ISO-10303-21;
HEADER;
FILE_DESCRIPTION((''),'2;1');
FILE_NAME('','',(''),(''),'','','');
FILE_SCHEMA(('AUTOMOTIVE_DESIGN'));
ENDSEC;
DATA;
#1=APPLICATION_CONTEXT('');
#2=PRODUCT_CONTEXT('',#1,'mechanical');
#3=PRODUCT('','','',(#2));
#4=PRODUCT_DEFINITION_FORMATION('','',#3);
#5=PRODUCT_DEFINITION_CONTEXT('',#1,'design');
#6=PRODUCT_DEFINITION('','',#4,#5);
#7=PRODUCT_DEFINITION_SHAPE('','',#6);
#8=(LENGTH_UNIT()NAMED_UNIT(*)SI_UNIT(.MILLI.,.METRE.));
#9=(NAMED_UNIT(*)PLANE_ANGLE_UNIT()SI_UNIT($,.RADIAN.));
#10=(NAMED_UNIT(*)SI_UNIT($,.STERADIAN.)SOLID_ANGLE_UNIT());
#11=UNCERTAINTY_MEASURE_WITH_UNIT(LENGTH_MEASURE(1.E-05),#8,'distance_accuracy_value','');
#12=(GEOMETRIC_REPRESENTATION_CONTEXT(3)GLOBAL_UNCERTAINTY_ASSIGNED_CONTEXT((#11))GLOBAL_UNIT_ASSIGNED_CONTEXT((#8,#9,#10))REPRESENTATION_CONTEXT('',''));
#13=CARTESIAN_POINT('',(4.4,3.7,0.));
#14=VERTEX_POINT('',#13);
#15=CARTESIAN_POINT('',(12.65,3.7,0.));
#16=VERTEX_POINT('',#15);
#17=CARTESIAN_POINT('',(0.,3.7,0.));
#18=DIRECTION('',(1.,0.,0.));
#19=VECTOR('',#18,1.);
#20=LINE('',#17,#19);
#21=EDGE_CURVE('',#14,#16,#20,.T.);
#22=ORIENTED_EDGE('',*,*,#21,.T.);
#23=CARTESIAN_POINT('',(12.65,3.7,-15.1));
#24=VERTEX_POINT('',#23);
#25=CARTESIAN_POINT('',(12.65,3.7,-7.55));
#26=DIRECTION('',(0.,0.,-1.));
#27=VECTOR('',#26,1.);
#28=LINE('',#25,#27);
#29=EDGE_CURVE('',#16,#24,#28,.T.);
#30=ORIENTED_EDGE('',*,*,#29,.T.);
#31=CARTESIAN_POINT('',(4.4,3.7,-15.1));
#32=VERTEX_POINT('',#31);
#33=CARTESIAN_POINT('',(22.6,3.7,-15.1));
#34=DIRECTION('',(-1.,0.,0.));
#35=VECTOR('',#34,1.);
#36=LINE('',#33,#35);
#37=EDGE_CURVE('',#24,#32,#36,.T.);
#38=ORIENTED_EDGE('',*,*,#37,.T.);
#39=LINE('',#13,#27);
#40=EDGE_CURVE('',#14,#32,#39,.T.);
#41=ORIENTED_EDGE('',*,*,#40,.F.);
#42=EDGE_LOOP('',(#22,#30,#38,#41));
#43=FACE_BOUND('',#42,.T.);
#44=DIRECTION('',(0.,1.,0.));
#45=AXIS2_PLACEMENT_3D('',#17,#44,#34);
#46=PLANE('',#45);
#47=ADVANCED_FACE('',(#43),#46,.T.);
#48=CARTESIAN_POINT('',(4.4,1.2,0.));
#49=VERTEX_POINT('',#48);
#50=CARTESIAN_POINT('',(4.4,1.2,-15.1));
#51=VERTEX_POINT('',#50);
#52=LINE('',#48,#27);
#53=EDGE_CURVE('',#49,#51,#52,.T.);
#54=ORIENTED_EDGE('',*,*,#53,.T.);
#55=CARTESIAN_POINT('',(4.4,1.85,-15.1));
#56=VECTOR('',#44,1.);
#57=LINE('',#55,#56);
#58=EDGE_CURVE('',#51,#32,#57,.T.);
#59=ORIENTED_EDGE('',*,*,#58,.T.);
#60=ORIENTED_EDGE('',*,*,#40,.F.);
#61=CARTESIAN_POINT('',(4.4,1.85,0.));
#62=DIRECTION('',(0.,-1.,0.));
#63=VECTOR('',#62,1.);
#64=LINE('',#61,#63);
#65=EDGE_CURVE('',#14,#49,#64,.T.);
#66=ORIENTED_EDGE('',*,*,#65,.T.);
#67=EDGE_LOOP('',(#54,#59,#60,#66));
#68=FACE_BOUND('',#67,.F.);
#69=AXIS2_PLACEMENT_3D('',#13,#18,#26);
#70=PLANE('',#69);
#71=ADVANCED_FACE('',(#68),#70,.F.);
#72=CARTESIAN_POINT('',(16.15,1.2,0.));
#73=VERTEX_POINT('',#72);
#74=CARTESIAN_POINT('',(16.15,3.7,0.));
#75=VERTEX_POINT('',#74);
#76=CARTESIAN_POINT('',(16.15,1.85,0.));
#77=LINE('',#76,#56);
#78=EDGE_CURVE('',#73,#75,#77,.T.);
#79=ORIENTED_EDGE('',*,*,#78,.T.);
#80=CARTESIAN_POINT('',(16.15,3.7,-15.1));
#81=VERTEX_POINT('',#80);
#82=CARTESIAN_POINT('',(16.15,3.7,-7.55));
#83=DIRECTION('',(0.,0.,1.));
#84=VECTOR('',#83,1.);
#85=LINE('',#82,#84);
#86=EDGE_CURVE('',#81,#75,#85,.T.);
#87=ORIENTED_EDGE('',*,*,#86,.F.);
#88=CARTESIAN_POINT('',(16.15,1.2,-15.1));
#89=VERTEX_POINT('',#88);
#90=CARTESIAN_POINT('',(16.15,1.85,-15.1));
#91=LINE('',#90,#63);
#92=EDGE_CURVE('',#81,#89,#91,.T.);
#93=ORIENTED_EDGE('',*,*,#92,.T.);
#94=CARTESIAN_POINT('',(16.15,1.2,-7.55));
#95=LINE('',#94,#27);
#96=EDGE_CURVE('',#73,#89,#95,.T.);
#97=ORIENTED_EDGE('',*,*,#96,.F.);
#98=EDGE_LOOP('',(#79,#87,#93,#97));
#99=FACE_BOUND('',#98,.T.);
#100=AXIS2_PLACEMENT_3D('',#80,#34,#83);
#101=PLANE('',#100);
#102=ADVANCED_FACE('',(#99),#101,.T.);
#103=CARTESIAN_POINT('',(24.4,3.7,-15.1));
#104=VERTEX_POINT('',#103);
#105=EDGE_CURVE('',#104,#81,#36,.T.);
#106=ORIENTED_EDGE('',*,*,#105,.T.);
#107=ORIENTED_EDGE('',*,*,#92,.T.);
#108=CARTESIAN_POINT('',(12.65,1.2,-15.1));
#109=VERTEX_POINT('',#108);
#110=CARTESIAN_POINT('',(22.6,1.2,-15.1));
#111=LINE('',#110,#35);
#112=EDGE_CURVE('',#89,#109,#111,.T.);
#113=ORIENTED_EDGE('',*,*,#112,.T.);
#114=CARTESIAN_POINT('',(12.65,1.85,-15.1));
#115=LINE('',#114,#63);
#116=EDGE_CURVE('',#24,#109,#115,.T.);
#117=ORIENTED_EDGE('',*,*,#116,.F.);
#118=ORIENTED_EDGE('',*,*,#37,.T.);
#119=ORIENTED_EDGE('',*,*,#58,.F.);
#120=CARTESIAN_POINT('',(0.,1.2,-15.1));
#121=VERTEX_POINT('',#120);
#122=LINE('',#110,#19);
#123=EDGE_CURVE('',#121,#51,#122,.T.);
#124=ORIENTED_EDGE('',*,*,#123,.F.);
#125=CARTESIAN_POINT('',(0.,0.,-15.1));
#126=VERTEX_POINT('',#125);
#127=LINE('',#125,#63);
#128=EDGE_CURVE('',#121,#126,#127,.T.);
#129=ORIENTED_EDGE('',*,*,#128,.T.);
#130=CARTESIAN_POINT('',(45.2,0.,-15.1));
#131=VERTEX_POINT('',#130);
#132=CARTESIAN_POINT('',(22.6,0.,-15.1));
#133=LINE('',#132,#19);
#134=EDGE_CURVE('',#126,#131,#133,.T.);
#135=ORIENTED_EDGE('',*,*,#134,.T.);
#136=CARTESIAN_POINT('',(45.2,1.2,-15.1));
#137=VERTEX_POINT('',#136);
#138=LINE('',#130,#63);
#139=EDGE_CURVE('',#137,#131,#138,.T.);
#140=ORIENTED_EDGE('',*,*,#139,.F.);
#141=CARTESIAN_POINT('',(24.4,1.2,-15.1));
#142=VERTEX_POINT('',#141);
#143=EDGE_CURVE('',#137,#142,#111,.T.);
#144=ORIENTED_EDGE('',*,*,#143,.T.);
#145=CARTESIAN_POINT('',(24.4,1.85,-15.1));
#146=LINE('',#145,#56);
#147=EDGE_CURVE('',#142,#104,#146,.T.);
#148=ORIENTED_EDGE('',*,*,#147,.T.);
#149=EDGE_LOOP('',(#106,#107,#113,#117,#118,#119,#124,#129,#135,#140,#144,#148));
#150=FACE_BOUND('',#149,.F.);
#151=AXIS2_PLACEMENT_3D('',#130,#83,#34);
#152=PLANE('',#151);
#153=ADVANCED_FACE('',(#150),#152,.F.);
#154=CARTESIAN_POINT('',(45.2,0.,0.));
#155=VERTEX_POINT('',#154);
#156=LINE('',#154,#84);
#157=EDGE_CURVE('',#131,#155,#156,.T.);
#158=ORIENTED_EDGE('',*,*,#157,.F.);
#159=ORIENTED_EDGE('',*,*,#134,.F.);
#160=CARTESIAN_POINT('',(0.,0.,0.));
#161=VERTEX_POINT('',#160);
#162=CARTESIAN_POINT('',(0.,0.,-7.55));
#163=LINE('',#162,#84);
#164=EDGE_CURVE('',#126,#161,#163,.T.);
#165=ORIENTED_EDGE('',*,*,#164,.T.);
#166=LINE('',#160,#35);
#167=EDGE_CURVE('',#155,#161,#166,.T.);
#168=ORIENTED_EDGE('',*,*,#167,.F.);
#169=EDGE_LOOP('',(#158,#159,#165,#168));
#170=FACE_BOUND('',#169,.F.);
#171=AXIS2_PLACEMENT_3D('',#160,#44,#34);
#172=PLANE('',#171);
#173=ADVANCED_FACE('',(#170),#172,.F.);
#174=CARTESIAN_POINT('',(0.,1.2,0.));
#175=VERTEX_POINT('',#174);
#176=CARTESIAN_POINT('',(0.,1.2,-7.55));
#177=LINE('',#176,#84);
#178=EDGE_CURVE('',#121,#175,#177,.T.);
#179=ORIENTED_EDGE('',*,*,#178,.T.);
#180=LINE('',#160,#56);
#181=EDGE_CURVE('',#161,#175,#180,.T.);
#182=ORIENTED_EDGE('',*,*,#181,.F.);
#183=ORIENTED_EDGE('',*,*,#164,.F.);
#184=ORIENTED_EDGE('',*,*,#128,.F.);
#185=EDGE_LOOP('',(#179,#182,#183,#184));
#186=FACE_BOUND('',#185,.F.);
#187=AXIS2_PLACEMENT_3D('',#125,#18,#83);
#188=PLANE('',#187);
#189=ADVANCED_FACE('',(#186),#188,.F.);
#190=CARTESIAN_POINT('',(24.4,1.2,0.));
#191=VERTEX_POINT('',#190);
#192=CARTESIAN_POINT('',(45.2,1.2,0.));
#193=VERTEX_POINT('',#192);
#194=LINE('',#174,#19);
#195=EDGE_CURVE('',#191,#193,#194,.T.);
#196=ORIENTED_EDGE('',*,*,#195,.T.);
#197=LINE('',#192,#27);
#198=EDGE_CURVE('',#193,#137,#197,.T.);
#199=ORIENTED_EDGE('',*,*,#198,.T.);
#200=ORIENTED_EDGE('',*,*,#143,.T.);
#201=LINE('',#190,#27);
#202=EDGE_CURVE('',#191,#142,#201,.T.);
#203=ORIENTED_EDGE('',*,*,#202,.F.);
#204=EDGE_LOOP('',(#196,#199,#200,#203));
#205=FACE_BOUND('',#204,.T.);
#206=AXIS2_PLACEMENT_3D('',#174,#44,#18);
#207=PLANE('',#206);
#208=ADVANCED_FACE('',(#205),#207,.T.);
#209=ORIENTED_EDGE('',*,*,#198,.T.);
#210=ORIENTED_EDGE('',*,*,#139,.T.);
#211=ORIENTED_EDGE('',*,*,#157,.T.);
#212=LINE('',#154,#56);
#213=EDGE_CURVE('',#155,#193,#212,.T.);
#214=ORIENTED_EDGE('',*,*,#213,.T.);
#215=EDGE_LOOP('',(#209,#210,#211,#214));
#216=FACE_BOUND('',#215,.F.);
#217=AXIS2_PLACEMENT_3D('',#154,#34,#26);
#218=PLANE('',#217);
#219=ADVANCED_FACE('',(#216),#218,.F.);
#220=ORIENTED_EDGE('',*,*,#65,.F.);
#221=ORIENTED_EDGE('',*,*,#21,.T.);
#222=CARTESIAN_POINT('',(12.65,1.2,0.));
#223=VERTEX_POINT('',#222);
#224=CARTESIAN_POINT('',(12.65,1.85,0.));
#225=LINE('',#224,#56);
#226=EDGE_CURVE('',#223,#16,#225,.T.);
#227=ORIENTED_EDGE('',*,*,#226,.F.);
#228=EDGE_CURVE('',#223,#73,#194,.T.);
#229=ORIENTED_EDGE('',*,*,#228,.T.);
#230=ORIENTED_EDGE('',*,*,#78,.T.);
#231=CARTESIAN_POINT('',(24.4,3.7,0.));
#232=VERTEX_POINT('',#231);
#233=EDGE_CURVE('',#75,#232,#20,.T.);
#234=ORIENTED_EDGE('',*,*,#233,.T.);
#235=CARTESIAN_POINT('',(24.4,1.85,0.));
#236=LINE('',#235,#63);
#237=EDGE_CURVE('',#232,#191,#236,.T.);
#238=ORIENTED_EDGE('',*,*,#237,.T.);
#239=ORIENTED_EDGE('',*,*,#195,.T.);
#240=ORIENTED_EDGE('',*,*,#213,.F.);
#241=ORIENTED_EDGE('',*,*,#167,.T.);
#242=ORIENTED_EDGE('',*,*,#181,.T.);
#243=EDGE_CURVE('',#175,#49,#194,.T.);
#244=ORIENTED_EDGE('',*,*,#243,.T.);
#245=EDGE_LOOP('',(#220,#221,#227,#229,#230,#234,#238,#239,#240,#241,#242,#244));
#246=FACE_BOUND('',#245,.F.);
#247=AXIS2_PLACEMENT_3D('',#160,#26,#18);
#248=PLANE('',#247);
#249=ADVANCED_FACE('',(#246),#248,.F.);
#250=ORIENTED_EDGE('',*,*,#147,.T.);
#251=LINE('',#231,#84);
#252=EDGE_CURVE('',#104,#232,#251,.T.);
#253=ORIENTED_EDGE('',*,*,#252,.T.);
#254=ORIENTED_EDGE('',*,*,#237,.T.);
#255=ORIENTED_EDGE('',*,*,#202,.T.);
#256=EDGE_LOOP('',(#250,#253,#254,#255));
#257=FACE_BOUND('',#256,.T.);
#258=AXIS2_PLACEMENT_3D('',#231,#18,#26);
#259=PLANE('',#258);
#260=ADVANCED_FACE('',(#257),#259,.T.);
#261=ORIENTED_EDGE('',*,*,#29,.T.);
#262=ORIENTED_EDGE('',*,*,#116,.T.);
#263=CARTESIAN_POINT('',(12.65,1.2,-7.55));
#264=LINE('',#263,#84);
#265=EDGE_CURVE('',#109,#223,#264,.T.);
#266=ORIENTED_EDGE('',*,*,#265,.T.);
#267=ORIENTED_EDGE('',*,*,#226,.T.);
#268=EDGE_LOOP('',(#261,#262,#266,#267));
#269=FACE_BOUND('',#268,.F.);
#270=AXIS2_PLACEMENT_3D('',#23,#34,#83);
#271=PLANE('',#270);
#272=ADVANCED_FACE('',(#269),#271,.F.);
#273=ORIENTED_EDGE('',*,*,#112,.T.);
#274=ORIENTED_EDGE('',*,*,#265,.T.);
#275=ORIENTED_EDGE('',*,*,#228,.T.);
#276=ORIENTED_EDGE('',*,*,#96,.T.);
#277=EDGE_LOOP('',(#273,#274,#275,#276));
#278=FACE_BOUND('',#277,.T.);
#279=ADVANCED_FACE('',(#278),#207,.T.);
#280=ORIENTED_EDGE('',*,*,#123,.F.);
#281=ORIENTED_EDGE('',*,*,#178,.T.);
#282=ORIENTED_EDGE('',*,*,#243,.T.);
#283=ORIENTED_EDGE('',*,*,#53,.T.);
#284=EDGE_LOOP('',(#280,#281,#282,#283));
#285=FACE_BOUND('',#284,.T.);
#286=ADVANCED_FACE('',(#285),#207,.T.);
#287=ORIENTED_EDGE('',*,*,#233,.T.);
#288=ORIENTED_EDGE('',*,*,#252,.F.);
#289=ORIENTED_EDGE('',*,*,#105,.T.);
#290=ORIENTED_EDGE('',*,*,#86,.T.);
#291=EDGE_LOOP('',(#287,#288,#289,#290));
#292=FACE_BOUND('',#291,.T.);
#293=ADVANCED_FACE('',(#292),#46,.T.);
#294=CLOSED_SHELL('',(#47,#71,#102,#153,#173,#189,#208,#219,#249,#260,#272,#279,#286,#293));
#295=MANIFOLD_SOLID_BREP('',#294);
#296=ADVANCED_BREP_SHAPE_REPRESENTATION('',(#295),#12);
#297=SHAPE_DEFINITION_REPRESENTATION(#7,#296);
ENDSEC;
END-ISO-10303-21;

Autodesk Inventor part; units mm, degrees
ref_plane "YZ Plane" through (0, 0, 0) normal (1, 0, 0) x (0, 1, 0)
ref_plane "XZ Plane" through (0, 0, 0) normal (0, 1, 0) x (-1, 0, 0)
ref_plane "XY Plane" through (0, 0, 0) normal (0, 0, 1) x (1, 0, 0)
sketch "스케치1" plane through (0, 0, 0) normal (0, 1, 0) x (-1, 0, 0)
  line L0 (0, 0) -> (-45.2, 0)
  line L1 (-45.2, 0) -> (-45.2, -15.1)
  line L2 (-45.2, -15.1) -> (0, -15.1)
  line L3 (0, -15.1) -> (0, 0)
  dimension "d0" = 45.2
  dimension "d1" = 15.1
extrude "돌출1" add sketch "스케치1" along normal blind 3.7
sketch "스케치2" plane through (0, 3.7, 0) normal (0, 1, 0) x (1, 0, 0)
  line L0 (0, 0) -> (45.2, 0) projected
  line L1 (45.2, 15.1) -> (0, 15.1) projected
  line L2 (0, 0) -> (4.4, 0)
  line L3 (4.4, 0) -> (4.4, 15.1)
  line L4 (4.4, 15.1) -> (0, 15.1)
  line L5 (0, 15.1) -> (0, 0)
  line L6 (4.4, 15.1) -> (14.4, 15.1)
  line L7 (14.4, 15.1) -> (14.4, 0)
  line L8 (14.4, 0) -> (4.4, 0)
  line L9 (4.4, 0) -> (4.4, 15.1)
  line L10 (14.4, 0) -> (13.4, 0)
  line L11 (13.4, 0) -> (15.4, 0)
  line L12 (13.4, 0) -> (5.6, 0)
  line L13 (5.6, 0) -> (5.6, 15.1)
  line L14 (5.6, 15.1) -> (13.4, 15.1)
  line L15 (13.4, 15.1) -> (13.4, 0)
  line L16 (15.4, 0) -> (23.2, 0)
  line L17 (23.2, 0) -> (23.2, 15.1)
  line L18 (23.2, 15.1) -> (15.4, 15.1)
  line L19 (15.4, 15.1) -> (15.4, 0)
  line L20 (23.2, 15.1) -> (45.2, 15.1)
  line L21 (45.2, 15.1) -> (45.2, 0)
  line L22 (45.2, 0) -> (23.2, 0)
  line L23 (23.2, 0) -> (23.2, 15.1)
  dimension "d4" = 4.4
  dimension "d5" = 10
  dimension "d6" = 1
  dimension "d7" = 2
  dimension "d8" = 7.8
  dimension "d9" = 7.8
extrude "돌출2" cut sketch "스케치2" against normal blind 2.5 contours L5 L1 L3 L0 | L15 L1 L7 L0 | L7 L1 L19 L0 | L17 L1 L21 L0
offset faces "크기1" outward -0.75 faces at (13.4, 2.8667, -10.0667) (15.4, 2.8667, -5.0333)
offset faces "크기2" outward 1.2 faces at (23.2, 2.0333, -5.0333)
properties part number "BMS"
